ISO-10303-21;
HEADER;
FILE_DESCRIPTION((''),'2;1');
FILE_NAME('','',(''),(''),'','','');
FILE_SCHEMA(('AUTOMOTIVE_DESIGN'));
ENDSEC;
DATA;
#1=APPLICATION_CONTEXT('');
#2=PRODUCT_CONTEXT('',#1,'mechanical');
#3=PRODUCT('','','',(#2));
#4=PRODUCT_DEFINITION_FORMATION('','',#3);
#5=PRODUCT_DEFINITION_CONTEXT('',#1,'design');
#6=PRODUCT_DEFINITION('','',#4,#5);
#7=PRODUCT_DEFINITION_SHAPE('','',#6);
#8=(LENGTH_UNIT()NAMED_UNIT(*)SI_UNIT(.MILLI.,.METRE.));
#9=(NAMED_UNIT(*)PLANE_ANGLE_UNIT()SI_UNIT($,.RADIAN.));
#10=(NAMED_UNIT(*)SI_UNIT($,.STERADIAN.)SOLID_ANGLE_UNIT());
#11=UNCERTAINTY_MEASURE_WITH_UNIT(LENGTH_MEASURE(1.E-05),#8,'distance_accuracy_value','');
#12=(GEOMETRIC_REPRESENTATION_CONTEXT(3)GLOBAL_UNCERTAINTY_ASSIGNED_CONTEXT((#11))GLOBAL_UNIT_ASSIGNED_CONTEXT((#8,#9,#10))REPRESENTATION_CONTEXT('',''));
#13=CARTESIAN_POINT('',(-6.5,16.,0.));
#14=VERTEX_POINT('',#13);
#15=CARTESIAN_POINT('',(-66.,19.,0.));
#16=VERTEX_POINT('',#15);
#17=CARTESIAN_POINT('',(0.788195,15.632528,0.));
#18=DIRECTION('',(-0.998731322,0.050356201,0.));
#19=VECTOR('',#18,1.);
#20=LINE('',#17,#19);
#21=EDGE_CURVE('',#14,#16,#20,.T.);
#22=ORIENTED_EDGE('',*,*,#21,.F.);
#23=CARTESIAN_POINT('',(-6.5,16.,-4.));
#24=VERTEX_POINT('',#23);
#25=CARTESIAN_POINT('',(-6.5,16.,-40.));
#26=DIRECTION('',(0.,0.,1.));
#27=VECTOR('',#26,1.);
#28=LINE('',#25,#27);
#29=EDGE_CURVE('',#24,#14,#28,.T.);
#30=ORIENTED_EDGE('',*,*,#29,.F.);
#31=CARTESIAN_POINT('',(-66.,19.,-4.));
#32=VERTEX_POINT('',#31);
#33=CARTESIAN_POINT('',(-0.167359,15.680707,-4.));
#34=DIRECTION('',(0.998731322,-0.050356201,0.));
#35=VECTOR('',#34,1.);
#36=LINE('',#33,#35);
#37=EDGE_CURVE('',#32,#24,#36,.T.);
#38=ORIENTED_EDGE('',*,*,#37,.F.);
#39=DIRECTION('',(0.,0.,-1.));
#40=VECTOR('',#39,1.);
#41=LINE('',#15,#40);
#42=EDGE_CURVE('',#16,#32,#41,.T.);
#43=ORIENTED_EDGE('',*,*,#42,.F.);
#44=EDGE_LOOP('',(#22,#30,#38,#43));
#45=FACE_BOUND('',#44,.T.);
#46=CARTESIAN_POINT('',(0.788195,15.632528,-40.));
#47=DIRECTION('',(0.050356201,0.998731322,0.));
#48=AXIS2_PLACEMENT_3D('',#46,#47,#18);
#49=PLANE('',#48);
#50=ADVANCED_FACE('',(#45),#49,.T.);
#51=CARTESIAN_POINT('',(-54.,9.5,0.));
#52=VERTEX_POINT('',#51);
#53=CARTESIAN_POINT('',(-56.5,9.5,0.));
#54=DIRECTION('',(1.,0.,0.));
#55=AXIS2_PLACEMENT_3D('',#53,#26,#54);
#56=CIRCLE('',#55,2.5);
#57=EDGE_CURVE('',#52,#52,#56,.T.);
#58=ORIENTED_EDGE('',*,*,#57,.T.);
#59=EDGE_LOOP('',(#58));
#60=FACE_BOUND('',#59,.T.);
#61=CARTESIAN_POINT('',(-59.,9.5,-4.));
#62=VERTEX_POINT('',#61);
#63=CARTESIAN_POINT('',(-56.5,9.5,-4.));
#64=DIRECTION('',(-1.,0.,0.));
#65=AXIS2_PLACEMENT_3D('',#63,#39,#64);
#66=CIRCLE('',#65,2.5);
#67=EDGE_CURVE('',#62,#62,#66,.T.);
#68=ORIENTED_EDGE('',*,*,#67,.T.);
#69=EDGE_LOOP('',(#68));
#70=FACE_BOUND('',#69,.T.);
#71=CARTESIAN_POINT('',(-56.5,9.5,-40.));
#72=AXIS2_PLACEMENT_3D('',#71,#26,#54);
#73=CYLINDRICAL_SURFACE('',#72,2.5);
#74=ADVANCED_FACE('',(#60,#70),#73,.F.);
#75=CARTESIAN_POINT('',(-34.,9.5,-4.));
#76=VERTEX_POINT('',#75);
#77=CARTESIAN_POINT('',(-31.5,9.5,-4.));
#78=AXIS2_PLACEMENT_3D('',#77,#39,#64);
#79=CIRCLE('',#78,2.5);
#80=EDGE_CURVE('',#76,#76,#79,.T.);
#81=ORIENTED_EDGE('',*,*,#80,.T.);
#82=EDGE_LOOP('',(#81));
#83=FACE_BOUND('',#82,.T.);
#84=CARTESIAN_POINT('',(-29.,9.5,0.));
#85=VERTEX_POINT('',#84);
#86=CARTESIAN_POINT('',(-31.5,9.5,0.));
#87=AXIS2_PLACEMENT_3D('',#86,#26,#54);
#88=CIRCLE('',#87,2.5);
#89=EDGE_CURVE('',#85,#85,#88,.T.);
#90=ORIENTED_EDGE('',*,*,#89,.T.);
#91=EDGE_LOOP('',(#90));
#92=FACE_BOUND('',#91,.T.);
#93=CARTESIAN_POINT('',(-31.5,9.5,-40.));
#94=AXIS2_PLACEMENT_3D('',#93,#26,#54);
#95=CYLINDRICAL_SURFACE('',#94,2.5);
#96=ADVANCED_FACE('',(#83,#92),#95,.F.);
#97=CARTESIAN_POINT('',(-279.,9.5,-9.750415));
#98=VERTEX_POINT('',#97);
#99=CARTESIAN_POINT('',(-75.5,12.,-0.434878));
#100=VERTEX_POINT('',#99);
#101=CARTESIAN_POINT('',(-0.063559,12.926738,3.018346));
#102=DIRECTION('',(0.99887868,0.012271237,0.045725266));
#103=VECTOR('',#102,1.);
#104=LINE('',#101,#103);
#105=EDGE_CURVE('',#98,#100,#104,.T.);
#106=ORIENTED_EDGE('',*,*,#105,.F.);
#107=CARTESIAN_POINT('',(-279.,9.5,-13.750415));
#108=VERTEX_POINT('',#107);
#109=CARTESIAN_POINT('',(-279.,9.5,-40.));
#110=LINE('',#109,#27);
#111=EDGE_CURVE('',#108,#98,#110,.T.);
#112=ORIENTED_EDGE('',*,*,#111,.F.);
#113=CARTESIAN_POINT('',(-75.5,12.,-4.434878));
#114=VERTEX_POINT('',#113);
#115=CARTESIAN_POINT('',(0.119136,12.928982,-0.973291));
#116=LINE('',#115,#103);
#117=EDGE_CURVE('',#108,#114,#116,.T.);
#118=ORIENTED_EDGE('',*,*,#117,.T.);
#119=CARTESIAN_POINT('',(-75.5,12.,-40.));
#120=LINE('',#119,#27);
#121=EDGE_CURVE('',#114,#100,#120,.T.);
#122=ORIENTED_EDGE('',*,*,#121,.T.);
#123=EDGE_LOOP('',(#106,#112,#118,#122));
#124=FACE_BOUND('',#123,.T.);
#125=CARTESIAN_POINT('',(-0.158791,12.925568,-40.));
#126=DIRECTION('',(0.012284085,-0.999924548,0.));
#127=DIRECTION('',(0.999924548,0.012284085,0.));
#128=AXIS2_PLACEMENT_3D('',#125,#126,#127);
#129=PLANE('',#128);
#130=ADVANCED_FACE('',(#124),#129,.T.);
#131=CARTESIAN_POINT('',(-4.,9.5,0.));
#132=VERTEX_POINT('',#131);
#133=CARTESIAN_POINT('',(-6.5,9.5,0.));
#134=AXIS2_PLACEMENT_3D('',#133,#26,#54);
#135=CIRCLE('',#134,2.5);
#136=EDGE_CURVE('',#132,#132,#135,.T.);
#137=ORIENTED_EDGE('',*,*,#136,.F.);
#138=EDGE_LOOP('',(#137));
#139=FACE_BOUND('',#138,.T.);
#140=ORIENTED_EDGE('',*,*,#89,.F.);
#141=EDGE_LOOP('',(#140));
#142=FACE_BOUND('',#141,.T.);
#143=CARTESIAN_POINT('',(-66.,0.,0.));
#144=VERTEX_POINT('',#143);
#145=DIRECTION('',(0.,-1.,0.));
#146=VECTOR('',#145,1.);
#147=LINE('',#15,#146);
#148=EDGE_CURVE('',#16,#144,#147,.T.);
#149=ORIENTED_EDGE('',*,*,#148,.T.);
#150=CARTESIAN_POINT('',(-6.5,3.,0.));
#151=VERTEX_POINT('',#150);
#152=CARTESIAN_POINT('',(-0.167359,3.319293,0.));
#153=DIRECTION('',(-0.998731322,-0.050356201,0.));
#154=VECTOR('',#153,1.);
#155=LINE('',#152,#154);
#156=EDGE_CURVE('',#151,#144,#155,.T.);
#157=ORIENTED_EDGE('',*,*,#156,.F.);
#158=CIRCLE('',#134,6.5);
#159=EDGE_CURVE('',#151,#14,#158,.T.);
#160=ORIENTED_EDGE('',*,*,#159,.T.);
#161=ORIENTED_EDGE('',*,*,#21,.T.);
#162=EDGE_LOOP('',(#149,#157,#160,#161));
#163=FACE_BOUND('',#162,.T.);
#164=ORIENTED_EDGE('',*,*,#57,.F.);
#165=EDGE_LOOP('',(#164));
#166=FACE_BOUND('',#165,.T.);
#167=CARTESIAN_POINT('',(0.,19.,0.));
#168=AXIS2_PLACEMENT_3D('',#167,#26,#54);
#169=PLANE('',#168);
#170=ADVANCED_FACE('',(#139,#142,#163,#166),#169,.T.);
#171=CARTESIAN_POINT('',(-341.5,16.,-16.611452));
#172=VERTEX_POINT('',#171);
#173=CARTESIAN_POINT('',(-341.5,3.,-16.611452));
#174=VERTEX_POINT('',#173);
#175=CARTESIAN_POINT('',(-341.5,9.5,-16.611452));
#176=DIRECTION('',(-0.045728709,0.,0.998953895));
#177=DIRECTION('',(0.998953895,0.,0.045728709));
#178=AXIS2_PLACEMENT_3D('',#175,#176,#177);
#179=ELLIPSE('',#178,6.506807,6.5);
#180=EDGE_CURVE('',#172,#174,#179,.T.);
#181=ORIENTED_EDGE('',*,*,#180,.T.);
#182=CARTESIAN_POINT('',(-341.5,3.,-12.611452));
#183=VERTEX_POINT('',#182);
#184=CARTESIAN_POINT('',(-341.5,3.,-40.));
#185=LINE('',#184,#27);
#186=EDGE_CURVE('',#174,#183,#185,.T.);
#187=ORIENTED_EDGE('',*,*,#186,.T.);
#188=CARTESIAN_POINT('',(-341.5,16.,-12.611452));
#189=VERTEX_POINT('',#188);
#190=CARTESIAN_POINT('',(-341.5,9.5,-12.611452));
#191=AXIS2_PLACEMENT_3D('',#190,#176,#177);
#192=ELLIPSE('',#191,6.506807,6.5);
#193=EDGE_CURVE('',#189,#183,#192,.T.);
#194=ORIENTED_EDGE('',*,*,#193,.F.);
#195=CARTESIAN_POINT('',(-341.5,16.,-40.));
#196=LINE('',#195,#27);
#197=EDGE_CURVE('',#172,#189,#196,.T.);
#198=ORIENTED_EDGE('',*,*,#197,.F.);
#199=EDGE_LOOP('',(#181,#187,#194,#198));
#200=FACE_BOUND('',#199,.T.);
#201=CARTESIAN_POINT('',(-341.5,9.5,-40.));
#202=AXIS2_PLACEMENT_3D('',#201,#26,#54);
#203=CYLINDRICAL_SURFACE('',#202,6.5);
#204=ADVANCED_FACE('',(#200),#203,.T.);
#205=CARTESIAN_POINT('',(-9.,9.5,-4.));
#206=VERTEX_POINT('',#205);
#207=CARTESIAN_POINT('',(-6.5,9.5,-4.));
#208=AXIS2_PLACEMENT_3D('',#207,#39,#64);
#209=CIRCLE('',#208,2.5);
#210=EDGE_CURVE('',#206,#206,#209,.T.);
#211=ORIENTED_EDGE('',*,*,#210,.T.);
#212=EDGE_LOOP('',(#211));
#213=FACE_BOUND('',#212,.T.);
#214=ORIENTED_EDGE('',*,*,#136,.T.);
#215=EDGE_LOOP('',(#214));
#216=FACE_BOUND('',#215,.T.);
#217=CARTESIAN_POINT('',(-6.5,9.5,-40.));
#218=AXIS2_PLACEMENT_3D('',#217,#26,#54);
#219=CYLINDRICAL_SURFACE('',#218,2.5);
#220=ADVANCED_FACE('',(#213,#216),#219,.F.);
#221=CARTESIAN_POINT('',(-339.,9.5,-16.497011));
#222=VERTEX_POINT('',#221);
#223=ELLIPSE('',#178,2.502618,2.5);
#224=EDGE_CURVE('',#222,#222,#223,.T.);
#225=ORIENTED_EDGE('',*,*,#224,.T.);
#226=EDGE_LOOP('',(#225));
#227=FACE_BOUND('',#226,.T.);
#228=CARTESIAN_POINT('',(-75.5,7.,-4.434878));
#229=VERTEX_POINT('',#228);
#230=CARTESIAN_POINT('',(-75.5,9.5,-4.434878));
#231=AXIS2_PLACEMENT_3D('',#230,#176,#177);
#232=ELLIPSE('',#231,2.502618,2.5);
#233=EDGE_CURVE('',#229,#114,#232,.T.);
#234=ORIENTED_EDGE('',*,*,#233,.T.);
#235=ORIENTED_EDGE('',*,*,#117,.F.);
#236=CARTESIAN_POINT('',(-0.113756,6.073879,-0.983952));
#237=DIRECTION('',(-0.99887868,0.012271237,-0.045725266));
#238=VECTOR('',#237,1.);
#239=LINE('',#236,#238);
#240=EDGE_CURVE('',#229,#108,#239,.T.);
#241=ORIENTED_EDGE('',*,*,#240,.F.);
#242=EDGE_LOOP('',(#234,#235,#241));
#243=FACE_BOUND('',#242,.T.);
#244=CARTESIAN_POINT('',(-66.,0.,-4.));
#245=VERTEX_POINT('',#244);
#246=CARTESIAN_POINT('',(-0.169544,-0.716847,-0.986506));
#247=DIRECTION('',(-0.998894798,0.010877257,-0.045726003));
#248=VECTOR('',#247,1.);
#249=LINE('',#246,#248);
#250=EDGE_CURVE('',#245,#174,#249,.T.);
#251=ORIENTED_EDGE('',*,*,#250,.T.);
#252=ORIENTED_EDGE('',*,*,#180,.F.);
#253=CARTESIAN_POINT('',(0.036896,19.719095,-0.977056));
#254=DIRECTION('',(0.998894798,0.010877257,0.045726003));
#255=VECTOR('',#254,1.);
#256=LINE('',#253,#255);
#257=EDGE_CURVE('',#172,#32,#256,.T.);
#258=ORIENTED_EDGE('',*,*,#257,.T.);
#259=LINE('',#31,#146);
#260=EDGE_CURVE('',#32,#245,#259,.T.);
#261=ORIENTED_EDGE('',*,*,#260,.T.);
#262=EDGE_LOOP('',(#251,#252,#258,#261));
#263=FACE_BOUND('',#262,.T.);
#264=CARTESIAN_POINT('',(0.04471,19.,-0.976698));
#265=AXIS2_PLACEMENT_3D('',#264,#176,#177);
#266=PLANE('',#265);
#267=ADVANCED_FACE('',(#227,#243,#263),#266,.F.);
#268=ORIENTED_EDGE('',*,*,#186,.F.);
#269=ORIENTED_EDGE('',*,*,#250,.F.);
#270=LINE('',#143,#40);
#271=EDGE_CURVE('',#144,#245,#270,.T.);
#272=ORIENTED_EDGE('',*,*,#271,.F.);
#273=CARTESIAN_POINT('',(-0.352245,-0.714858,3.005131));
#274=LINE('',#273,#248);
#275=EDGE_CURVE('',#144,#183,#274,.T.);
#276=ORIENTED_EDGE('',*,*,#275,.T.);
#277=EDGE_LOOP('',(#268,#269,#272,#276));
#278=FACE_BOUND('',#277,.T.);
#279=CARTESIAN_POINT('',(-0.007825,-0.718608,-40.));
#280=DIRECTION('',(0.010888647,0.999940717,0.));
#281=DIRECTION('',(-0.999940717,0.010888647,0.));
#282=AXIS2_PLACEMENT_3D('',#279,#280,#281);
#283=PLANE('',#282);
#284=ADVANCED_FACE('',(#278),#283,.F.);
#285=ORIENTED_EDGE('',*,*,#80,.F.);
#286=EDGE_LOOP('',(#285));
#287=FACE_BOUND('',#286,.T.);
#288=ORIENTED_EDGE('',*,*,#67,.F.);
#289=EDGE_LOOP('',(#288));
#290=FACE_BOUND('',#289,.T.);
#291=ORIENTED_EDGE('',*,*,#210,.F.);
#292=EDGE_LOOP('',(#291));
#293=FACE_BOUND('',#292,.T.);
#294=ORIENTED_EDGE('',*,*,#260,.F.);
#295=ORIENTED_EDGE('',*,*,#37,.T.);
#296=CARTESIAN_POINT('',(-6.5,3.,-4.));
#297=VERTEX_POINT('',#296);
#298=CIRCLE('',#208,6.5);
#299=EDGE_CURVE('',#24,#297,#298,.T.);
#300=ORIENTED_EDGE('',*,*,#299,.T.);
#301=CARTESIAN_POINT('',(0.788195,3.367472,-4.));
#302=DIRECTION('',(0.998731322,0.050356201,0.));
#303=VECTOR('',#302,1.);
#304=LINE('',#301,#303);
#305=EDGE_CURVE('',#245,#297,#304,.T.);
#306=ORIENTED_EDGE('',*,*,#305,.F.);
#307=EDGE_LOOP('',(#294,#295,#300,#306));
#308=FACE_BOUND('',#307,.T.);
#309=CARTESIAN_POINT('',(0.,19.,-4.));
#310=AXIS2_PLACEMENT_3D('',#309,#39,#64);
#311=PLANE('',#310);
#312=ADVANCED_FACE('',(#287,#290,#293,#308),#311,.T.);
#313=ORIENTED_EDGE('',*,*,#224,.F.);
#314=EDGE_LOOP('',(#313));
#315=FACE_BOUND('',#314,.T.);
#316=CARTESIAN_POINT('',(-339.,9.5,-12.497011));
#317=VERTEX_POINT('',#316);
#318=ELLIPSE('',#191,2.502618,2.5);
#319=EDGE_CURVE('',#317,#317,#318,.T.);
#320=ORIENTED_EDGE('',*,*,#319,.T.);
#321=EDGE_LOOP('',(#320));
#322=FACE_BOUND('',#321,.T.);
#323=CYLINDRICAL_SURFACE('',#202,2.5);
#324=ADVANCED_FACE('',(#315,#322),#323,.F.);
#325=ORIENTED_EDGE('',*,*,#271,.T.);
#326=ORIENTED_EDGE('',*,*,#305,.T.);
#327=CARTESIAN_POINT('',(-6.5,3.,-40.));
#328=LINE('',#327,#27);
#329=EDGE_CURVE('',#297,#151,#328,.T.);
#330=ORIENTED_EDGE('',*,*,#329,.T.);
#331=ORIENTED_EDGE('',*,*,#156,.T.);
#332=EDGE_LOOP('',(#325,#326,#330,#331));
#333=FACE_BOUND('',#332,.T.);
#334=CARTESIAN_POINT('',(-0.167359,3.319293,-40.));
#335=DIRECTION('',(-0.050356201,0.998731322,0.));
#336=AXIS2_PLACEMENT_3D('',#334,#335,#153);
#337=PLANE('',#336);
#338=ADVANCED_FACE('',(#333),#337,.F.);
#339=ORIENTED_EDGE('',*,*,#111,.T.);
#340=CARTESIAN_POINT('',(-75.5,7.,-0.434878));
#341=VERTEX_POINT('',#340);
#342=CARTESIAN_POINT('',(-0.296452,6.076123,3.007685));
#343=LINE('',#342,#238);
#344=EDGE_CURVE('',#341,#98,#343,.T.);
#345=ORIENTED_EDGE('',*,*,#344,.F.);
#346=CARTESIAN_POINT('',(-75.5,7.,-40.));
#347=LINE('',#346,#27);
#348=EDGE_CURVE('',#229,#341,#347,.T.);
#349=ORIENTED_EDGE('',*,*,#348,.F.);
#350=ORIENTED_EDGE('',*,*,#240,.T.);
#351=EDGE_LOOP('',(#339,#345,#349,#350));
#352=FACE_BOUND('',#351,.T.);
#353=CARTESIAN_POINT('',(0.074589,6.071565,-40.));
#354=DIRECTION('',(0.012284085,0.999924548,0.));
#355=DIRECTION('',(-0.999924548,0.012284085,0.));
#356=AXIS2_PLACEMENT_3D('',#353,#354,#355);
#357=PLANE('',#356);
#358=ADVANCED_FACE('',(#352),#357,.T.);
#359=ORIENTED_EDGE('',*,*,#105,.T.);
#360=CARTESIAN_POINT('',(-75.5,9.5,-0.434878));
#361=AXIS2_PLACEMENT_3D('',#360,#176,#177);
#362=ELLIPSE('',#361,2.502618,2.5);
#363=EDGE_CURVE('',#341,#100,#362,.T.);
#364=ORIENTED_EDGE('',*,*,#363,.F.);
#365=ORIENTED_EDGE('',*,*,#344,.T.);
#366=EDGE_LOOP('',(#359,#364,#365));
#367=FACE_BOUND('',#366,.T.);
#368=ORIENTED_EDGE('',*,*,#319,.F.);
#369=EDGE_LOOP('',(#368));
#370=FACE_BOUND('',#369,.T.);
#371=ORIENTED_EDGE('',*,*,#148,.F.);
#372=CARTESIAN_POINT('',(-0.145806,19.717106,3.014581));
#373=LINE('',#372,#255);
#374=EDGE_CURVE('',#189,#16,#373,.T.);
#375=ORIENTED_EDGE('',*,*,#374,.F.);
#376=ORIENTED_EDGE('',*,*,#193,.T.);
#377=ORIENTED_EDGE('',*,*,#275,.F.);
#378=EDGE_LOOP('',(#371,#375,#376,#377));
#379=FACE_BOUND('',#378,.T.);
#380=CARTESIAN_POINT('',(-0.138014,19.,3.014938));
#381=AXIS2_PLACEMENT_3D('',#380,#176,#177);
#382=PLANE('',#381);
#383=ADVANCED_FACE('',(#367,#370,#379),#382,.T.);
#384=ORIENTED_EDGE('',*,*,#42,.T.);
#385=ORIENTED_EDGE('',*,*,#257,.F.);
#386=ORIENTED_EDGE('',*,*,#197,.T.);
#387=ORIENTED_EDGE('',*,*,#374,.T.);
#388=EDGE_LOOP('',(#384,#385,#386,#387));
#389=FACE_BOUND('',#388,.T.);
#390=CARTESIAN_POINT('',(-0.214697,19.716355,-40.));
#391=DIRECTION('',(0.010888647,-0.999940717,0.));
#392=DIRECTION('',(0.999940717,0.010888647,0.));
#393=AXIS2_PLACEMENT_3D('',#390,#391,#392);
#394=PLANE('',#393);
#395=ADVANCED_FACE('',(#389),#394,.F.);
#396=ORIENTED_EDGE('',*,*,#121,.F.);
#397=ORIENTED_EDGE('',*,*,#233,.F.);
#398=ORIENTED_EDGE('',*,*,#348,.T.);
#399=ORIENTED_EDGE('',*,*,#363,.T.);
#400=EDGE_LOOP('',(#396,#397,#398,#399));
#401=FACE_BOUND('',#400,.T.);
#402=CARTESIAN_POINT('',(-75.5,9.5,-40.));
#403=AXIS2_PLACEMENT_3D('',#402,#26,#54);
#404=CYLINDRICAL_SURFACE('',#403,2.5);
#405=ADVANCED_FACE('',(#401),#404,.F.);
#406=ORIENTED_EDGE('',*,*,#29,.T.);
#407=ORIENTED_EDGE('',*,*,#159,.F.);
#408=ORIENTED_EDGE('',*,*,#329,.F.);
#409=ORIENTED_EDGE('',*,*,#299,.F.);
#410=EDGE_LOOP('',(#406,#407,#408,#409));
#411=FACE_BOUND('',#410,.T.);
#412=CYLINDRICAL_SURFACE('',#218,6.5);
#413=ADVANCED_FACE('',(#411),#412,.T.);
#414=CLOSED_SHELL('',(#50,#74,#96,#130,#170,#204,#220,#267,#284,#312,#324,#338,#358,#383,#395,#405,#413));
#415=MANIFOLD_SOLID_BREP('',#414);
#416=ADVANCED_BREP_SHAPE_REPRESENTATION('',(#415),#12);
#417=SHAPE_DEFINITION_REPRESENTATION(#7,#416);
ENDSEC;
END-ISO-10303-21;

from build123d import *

# Parameters (mm, degrees)
BOSS_EXTRUDE1_DEPTH = 19
SKETCH2_R           = 2.5
CUT_EXTRUDE5_DEPTH  = 40


with BuildPart() as part:
    # Sketch1 → Boss-Extrude1 (new body)
    with BuildSketch(Plane(origin=(0, 0, 0), x_dir=(1, 0, 0), z_dir=(0, 1, 0))):
        Polygon((-66, 0), (0, 0), (0, 4), (-66, 4), (-348, 16.909), (-348, 12.909), align=None)
    extrude(amount=BOSS_EXTRUDE1_DEPTH)

    # Sketch2 → Cut-Extrude5 (cut)
    with BuildSketch(Plane.XY):
        with BuildLine():
            ThreePointArc((-6.5, 16), (-1.903805922, 14.096194078), (0, 9.5))
            Line((0, 9.5), (0, 19))
            Line((0, 19), (-66, 19))
            Line((-66, 19), (-6.5, 16))
        make_face()
        with BuildLine():
            Line((0, 0), (0, 9.5))
            ThreePointArc((0, 9.5), (-1.903805922, 4.903805922), (-6.5, 3))
            Line((-6.5, 3), (-66, 0))
            Line((-66, 0), (0, 0))
        make_face()
        with Locations((-6.5, 9.5)):
            Circle(SKETCH2_R)
        with BuildLine():
            Line((-75.5, 12), (-279, 9.5))
            Line((-279, 9.5), (-75.5, 7))
            ThreePointArc((-75.5, 7), (-73, 9.5), (-75.5, 12))
        make_face()
        with BuildLine():
            Line((-341.5, 16), (-66, 19))
            Line((-66, 19), (-348, 19))
            Line((-348, 19), (-348, 9.5))
            ThreePointArc((-348, 9.5), (-346.096194078, 14.096194078), (-341.5, 16))
        make_face()
        with BuildLine():
            Line((-348, 0), (-66, 0))
            Line((-66, 0), (-341.5, 3))
            ThreePointArc((-341.5, 3), (-346.096194078, 4.903805922), (-348, 9.5))
            Line((-348, 9.5), (-348, 0))
        make_face()
        with Locations((-31.5, 9.5)):
            Circle(SKETCH2_R)
        with Locations((-341.5, 9.5)):
            Circle(SKETCH2_R)
        with Locations((-56.5, 9.5)):
            Circle(SKETCH2_R)
    extrude(amount=-CUT_EXTRUDE5_DEPTH, mode=Mode.SUBTRACT)


solid = part.part
